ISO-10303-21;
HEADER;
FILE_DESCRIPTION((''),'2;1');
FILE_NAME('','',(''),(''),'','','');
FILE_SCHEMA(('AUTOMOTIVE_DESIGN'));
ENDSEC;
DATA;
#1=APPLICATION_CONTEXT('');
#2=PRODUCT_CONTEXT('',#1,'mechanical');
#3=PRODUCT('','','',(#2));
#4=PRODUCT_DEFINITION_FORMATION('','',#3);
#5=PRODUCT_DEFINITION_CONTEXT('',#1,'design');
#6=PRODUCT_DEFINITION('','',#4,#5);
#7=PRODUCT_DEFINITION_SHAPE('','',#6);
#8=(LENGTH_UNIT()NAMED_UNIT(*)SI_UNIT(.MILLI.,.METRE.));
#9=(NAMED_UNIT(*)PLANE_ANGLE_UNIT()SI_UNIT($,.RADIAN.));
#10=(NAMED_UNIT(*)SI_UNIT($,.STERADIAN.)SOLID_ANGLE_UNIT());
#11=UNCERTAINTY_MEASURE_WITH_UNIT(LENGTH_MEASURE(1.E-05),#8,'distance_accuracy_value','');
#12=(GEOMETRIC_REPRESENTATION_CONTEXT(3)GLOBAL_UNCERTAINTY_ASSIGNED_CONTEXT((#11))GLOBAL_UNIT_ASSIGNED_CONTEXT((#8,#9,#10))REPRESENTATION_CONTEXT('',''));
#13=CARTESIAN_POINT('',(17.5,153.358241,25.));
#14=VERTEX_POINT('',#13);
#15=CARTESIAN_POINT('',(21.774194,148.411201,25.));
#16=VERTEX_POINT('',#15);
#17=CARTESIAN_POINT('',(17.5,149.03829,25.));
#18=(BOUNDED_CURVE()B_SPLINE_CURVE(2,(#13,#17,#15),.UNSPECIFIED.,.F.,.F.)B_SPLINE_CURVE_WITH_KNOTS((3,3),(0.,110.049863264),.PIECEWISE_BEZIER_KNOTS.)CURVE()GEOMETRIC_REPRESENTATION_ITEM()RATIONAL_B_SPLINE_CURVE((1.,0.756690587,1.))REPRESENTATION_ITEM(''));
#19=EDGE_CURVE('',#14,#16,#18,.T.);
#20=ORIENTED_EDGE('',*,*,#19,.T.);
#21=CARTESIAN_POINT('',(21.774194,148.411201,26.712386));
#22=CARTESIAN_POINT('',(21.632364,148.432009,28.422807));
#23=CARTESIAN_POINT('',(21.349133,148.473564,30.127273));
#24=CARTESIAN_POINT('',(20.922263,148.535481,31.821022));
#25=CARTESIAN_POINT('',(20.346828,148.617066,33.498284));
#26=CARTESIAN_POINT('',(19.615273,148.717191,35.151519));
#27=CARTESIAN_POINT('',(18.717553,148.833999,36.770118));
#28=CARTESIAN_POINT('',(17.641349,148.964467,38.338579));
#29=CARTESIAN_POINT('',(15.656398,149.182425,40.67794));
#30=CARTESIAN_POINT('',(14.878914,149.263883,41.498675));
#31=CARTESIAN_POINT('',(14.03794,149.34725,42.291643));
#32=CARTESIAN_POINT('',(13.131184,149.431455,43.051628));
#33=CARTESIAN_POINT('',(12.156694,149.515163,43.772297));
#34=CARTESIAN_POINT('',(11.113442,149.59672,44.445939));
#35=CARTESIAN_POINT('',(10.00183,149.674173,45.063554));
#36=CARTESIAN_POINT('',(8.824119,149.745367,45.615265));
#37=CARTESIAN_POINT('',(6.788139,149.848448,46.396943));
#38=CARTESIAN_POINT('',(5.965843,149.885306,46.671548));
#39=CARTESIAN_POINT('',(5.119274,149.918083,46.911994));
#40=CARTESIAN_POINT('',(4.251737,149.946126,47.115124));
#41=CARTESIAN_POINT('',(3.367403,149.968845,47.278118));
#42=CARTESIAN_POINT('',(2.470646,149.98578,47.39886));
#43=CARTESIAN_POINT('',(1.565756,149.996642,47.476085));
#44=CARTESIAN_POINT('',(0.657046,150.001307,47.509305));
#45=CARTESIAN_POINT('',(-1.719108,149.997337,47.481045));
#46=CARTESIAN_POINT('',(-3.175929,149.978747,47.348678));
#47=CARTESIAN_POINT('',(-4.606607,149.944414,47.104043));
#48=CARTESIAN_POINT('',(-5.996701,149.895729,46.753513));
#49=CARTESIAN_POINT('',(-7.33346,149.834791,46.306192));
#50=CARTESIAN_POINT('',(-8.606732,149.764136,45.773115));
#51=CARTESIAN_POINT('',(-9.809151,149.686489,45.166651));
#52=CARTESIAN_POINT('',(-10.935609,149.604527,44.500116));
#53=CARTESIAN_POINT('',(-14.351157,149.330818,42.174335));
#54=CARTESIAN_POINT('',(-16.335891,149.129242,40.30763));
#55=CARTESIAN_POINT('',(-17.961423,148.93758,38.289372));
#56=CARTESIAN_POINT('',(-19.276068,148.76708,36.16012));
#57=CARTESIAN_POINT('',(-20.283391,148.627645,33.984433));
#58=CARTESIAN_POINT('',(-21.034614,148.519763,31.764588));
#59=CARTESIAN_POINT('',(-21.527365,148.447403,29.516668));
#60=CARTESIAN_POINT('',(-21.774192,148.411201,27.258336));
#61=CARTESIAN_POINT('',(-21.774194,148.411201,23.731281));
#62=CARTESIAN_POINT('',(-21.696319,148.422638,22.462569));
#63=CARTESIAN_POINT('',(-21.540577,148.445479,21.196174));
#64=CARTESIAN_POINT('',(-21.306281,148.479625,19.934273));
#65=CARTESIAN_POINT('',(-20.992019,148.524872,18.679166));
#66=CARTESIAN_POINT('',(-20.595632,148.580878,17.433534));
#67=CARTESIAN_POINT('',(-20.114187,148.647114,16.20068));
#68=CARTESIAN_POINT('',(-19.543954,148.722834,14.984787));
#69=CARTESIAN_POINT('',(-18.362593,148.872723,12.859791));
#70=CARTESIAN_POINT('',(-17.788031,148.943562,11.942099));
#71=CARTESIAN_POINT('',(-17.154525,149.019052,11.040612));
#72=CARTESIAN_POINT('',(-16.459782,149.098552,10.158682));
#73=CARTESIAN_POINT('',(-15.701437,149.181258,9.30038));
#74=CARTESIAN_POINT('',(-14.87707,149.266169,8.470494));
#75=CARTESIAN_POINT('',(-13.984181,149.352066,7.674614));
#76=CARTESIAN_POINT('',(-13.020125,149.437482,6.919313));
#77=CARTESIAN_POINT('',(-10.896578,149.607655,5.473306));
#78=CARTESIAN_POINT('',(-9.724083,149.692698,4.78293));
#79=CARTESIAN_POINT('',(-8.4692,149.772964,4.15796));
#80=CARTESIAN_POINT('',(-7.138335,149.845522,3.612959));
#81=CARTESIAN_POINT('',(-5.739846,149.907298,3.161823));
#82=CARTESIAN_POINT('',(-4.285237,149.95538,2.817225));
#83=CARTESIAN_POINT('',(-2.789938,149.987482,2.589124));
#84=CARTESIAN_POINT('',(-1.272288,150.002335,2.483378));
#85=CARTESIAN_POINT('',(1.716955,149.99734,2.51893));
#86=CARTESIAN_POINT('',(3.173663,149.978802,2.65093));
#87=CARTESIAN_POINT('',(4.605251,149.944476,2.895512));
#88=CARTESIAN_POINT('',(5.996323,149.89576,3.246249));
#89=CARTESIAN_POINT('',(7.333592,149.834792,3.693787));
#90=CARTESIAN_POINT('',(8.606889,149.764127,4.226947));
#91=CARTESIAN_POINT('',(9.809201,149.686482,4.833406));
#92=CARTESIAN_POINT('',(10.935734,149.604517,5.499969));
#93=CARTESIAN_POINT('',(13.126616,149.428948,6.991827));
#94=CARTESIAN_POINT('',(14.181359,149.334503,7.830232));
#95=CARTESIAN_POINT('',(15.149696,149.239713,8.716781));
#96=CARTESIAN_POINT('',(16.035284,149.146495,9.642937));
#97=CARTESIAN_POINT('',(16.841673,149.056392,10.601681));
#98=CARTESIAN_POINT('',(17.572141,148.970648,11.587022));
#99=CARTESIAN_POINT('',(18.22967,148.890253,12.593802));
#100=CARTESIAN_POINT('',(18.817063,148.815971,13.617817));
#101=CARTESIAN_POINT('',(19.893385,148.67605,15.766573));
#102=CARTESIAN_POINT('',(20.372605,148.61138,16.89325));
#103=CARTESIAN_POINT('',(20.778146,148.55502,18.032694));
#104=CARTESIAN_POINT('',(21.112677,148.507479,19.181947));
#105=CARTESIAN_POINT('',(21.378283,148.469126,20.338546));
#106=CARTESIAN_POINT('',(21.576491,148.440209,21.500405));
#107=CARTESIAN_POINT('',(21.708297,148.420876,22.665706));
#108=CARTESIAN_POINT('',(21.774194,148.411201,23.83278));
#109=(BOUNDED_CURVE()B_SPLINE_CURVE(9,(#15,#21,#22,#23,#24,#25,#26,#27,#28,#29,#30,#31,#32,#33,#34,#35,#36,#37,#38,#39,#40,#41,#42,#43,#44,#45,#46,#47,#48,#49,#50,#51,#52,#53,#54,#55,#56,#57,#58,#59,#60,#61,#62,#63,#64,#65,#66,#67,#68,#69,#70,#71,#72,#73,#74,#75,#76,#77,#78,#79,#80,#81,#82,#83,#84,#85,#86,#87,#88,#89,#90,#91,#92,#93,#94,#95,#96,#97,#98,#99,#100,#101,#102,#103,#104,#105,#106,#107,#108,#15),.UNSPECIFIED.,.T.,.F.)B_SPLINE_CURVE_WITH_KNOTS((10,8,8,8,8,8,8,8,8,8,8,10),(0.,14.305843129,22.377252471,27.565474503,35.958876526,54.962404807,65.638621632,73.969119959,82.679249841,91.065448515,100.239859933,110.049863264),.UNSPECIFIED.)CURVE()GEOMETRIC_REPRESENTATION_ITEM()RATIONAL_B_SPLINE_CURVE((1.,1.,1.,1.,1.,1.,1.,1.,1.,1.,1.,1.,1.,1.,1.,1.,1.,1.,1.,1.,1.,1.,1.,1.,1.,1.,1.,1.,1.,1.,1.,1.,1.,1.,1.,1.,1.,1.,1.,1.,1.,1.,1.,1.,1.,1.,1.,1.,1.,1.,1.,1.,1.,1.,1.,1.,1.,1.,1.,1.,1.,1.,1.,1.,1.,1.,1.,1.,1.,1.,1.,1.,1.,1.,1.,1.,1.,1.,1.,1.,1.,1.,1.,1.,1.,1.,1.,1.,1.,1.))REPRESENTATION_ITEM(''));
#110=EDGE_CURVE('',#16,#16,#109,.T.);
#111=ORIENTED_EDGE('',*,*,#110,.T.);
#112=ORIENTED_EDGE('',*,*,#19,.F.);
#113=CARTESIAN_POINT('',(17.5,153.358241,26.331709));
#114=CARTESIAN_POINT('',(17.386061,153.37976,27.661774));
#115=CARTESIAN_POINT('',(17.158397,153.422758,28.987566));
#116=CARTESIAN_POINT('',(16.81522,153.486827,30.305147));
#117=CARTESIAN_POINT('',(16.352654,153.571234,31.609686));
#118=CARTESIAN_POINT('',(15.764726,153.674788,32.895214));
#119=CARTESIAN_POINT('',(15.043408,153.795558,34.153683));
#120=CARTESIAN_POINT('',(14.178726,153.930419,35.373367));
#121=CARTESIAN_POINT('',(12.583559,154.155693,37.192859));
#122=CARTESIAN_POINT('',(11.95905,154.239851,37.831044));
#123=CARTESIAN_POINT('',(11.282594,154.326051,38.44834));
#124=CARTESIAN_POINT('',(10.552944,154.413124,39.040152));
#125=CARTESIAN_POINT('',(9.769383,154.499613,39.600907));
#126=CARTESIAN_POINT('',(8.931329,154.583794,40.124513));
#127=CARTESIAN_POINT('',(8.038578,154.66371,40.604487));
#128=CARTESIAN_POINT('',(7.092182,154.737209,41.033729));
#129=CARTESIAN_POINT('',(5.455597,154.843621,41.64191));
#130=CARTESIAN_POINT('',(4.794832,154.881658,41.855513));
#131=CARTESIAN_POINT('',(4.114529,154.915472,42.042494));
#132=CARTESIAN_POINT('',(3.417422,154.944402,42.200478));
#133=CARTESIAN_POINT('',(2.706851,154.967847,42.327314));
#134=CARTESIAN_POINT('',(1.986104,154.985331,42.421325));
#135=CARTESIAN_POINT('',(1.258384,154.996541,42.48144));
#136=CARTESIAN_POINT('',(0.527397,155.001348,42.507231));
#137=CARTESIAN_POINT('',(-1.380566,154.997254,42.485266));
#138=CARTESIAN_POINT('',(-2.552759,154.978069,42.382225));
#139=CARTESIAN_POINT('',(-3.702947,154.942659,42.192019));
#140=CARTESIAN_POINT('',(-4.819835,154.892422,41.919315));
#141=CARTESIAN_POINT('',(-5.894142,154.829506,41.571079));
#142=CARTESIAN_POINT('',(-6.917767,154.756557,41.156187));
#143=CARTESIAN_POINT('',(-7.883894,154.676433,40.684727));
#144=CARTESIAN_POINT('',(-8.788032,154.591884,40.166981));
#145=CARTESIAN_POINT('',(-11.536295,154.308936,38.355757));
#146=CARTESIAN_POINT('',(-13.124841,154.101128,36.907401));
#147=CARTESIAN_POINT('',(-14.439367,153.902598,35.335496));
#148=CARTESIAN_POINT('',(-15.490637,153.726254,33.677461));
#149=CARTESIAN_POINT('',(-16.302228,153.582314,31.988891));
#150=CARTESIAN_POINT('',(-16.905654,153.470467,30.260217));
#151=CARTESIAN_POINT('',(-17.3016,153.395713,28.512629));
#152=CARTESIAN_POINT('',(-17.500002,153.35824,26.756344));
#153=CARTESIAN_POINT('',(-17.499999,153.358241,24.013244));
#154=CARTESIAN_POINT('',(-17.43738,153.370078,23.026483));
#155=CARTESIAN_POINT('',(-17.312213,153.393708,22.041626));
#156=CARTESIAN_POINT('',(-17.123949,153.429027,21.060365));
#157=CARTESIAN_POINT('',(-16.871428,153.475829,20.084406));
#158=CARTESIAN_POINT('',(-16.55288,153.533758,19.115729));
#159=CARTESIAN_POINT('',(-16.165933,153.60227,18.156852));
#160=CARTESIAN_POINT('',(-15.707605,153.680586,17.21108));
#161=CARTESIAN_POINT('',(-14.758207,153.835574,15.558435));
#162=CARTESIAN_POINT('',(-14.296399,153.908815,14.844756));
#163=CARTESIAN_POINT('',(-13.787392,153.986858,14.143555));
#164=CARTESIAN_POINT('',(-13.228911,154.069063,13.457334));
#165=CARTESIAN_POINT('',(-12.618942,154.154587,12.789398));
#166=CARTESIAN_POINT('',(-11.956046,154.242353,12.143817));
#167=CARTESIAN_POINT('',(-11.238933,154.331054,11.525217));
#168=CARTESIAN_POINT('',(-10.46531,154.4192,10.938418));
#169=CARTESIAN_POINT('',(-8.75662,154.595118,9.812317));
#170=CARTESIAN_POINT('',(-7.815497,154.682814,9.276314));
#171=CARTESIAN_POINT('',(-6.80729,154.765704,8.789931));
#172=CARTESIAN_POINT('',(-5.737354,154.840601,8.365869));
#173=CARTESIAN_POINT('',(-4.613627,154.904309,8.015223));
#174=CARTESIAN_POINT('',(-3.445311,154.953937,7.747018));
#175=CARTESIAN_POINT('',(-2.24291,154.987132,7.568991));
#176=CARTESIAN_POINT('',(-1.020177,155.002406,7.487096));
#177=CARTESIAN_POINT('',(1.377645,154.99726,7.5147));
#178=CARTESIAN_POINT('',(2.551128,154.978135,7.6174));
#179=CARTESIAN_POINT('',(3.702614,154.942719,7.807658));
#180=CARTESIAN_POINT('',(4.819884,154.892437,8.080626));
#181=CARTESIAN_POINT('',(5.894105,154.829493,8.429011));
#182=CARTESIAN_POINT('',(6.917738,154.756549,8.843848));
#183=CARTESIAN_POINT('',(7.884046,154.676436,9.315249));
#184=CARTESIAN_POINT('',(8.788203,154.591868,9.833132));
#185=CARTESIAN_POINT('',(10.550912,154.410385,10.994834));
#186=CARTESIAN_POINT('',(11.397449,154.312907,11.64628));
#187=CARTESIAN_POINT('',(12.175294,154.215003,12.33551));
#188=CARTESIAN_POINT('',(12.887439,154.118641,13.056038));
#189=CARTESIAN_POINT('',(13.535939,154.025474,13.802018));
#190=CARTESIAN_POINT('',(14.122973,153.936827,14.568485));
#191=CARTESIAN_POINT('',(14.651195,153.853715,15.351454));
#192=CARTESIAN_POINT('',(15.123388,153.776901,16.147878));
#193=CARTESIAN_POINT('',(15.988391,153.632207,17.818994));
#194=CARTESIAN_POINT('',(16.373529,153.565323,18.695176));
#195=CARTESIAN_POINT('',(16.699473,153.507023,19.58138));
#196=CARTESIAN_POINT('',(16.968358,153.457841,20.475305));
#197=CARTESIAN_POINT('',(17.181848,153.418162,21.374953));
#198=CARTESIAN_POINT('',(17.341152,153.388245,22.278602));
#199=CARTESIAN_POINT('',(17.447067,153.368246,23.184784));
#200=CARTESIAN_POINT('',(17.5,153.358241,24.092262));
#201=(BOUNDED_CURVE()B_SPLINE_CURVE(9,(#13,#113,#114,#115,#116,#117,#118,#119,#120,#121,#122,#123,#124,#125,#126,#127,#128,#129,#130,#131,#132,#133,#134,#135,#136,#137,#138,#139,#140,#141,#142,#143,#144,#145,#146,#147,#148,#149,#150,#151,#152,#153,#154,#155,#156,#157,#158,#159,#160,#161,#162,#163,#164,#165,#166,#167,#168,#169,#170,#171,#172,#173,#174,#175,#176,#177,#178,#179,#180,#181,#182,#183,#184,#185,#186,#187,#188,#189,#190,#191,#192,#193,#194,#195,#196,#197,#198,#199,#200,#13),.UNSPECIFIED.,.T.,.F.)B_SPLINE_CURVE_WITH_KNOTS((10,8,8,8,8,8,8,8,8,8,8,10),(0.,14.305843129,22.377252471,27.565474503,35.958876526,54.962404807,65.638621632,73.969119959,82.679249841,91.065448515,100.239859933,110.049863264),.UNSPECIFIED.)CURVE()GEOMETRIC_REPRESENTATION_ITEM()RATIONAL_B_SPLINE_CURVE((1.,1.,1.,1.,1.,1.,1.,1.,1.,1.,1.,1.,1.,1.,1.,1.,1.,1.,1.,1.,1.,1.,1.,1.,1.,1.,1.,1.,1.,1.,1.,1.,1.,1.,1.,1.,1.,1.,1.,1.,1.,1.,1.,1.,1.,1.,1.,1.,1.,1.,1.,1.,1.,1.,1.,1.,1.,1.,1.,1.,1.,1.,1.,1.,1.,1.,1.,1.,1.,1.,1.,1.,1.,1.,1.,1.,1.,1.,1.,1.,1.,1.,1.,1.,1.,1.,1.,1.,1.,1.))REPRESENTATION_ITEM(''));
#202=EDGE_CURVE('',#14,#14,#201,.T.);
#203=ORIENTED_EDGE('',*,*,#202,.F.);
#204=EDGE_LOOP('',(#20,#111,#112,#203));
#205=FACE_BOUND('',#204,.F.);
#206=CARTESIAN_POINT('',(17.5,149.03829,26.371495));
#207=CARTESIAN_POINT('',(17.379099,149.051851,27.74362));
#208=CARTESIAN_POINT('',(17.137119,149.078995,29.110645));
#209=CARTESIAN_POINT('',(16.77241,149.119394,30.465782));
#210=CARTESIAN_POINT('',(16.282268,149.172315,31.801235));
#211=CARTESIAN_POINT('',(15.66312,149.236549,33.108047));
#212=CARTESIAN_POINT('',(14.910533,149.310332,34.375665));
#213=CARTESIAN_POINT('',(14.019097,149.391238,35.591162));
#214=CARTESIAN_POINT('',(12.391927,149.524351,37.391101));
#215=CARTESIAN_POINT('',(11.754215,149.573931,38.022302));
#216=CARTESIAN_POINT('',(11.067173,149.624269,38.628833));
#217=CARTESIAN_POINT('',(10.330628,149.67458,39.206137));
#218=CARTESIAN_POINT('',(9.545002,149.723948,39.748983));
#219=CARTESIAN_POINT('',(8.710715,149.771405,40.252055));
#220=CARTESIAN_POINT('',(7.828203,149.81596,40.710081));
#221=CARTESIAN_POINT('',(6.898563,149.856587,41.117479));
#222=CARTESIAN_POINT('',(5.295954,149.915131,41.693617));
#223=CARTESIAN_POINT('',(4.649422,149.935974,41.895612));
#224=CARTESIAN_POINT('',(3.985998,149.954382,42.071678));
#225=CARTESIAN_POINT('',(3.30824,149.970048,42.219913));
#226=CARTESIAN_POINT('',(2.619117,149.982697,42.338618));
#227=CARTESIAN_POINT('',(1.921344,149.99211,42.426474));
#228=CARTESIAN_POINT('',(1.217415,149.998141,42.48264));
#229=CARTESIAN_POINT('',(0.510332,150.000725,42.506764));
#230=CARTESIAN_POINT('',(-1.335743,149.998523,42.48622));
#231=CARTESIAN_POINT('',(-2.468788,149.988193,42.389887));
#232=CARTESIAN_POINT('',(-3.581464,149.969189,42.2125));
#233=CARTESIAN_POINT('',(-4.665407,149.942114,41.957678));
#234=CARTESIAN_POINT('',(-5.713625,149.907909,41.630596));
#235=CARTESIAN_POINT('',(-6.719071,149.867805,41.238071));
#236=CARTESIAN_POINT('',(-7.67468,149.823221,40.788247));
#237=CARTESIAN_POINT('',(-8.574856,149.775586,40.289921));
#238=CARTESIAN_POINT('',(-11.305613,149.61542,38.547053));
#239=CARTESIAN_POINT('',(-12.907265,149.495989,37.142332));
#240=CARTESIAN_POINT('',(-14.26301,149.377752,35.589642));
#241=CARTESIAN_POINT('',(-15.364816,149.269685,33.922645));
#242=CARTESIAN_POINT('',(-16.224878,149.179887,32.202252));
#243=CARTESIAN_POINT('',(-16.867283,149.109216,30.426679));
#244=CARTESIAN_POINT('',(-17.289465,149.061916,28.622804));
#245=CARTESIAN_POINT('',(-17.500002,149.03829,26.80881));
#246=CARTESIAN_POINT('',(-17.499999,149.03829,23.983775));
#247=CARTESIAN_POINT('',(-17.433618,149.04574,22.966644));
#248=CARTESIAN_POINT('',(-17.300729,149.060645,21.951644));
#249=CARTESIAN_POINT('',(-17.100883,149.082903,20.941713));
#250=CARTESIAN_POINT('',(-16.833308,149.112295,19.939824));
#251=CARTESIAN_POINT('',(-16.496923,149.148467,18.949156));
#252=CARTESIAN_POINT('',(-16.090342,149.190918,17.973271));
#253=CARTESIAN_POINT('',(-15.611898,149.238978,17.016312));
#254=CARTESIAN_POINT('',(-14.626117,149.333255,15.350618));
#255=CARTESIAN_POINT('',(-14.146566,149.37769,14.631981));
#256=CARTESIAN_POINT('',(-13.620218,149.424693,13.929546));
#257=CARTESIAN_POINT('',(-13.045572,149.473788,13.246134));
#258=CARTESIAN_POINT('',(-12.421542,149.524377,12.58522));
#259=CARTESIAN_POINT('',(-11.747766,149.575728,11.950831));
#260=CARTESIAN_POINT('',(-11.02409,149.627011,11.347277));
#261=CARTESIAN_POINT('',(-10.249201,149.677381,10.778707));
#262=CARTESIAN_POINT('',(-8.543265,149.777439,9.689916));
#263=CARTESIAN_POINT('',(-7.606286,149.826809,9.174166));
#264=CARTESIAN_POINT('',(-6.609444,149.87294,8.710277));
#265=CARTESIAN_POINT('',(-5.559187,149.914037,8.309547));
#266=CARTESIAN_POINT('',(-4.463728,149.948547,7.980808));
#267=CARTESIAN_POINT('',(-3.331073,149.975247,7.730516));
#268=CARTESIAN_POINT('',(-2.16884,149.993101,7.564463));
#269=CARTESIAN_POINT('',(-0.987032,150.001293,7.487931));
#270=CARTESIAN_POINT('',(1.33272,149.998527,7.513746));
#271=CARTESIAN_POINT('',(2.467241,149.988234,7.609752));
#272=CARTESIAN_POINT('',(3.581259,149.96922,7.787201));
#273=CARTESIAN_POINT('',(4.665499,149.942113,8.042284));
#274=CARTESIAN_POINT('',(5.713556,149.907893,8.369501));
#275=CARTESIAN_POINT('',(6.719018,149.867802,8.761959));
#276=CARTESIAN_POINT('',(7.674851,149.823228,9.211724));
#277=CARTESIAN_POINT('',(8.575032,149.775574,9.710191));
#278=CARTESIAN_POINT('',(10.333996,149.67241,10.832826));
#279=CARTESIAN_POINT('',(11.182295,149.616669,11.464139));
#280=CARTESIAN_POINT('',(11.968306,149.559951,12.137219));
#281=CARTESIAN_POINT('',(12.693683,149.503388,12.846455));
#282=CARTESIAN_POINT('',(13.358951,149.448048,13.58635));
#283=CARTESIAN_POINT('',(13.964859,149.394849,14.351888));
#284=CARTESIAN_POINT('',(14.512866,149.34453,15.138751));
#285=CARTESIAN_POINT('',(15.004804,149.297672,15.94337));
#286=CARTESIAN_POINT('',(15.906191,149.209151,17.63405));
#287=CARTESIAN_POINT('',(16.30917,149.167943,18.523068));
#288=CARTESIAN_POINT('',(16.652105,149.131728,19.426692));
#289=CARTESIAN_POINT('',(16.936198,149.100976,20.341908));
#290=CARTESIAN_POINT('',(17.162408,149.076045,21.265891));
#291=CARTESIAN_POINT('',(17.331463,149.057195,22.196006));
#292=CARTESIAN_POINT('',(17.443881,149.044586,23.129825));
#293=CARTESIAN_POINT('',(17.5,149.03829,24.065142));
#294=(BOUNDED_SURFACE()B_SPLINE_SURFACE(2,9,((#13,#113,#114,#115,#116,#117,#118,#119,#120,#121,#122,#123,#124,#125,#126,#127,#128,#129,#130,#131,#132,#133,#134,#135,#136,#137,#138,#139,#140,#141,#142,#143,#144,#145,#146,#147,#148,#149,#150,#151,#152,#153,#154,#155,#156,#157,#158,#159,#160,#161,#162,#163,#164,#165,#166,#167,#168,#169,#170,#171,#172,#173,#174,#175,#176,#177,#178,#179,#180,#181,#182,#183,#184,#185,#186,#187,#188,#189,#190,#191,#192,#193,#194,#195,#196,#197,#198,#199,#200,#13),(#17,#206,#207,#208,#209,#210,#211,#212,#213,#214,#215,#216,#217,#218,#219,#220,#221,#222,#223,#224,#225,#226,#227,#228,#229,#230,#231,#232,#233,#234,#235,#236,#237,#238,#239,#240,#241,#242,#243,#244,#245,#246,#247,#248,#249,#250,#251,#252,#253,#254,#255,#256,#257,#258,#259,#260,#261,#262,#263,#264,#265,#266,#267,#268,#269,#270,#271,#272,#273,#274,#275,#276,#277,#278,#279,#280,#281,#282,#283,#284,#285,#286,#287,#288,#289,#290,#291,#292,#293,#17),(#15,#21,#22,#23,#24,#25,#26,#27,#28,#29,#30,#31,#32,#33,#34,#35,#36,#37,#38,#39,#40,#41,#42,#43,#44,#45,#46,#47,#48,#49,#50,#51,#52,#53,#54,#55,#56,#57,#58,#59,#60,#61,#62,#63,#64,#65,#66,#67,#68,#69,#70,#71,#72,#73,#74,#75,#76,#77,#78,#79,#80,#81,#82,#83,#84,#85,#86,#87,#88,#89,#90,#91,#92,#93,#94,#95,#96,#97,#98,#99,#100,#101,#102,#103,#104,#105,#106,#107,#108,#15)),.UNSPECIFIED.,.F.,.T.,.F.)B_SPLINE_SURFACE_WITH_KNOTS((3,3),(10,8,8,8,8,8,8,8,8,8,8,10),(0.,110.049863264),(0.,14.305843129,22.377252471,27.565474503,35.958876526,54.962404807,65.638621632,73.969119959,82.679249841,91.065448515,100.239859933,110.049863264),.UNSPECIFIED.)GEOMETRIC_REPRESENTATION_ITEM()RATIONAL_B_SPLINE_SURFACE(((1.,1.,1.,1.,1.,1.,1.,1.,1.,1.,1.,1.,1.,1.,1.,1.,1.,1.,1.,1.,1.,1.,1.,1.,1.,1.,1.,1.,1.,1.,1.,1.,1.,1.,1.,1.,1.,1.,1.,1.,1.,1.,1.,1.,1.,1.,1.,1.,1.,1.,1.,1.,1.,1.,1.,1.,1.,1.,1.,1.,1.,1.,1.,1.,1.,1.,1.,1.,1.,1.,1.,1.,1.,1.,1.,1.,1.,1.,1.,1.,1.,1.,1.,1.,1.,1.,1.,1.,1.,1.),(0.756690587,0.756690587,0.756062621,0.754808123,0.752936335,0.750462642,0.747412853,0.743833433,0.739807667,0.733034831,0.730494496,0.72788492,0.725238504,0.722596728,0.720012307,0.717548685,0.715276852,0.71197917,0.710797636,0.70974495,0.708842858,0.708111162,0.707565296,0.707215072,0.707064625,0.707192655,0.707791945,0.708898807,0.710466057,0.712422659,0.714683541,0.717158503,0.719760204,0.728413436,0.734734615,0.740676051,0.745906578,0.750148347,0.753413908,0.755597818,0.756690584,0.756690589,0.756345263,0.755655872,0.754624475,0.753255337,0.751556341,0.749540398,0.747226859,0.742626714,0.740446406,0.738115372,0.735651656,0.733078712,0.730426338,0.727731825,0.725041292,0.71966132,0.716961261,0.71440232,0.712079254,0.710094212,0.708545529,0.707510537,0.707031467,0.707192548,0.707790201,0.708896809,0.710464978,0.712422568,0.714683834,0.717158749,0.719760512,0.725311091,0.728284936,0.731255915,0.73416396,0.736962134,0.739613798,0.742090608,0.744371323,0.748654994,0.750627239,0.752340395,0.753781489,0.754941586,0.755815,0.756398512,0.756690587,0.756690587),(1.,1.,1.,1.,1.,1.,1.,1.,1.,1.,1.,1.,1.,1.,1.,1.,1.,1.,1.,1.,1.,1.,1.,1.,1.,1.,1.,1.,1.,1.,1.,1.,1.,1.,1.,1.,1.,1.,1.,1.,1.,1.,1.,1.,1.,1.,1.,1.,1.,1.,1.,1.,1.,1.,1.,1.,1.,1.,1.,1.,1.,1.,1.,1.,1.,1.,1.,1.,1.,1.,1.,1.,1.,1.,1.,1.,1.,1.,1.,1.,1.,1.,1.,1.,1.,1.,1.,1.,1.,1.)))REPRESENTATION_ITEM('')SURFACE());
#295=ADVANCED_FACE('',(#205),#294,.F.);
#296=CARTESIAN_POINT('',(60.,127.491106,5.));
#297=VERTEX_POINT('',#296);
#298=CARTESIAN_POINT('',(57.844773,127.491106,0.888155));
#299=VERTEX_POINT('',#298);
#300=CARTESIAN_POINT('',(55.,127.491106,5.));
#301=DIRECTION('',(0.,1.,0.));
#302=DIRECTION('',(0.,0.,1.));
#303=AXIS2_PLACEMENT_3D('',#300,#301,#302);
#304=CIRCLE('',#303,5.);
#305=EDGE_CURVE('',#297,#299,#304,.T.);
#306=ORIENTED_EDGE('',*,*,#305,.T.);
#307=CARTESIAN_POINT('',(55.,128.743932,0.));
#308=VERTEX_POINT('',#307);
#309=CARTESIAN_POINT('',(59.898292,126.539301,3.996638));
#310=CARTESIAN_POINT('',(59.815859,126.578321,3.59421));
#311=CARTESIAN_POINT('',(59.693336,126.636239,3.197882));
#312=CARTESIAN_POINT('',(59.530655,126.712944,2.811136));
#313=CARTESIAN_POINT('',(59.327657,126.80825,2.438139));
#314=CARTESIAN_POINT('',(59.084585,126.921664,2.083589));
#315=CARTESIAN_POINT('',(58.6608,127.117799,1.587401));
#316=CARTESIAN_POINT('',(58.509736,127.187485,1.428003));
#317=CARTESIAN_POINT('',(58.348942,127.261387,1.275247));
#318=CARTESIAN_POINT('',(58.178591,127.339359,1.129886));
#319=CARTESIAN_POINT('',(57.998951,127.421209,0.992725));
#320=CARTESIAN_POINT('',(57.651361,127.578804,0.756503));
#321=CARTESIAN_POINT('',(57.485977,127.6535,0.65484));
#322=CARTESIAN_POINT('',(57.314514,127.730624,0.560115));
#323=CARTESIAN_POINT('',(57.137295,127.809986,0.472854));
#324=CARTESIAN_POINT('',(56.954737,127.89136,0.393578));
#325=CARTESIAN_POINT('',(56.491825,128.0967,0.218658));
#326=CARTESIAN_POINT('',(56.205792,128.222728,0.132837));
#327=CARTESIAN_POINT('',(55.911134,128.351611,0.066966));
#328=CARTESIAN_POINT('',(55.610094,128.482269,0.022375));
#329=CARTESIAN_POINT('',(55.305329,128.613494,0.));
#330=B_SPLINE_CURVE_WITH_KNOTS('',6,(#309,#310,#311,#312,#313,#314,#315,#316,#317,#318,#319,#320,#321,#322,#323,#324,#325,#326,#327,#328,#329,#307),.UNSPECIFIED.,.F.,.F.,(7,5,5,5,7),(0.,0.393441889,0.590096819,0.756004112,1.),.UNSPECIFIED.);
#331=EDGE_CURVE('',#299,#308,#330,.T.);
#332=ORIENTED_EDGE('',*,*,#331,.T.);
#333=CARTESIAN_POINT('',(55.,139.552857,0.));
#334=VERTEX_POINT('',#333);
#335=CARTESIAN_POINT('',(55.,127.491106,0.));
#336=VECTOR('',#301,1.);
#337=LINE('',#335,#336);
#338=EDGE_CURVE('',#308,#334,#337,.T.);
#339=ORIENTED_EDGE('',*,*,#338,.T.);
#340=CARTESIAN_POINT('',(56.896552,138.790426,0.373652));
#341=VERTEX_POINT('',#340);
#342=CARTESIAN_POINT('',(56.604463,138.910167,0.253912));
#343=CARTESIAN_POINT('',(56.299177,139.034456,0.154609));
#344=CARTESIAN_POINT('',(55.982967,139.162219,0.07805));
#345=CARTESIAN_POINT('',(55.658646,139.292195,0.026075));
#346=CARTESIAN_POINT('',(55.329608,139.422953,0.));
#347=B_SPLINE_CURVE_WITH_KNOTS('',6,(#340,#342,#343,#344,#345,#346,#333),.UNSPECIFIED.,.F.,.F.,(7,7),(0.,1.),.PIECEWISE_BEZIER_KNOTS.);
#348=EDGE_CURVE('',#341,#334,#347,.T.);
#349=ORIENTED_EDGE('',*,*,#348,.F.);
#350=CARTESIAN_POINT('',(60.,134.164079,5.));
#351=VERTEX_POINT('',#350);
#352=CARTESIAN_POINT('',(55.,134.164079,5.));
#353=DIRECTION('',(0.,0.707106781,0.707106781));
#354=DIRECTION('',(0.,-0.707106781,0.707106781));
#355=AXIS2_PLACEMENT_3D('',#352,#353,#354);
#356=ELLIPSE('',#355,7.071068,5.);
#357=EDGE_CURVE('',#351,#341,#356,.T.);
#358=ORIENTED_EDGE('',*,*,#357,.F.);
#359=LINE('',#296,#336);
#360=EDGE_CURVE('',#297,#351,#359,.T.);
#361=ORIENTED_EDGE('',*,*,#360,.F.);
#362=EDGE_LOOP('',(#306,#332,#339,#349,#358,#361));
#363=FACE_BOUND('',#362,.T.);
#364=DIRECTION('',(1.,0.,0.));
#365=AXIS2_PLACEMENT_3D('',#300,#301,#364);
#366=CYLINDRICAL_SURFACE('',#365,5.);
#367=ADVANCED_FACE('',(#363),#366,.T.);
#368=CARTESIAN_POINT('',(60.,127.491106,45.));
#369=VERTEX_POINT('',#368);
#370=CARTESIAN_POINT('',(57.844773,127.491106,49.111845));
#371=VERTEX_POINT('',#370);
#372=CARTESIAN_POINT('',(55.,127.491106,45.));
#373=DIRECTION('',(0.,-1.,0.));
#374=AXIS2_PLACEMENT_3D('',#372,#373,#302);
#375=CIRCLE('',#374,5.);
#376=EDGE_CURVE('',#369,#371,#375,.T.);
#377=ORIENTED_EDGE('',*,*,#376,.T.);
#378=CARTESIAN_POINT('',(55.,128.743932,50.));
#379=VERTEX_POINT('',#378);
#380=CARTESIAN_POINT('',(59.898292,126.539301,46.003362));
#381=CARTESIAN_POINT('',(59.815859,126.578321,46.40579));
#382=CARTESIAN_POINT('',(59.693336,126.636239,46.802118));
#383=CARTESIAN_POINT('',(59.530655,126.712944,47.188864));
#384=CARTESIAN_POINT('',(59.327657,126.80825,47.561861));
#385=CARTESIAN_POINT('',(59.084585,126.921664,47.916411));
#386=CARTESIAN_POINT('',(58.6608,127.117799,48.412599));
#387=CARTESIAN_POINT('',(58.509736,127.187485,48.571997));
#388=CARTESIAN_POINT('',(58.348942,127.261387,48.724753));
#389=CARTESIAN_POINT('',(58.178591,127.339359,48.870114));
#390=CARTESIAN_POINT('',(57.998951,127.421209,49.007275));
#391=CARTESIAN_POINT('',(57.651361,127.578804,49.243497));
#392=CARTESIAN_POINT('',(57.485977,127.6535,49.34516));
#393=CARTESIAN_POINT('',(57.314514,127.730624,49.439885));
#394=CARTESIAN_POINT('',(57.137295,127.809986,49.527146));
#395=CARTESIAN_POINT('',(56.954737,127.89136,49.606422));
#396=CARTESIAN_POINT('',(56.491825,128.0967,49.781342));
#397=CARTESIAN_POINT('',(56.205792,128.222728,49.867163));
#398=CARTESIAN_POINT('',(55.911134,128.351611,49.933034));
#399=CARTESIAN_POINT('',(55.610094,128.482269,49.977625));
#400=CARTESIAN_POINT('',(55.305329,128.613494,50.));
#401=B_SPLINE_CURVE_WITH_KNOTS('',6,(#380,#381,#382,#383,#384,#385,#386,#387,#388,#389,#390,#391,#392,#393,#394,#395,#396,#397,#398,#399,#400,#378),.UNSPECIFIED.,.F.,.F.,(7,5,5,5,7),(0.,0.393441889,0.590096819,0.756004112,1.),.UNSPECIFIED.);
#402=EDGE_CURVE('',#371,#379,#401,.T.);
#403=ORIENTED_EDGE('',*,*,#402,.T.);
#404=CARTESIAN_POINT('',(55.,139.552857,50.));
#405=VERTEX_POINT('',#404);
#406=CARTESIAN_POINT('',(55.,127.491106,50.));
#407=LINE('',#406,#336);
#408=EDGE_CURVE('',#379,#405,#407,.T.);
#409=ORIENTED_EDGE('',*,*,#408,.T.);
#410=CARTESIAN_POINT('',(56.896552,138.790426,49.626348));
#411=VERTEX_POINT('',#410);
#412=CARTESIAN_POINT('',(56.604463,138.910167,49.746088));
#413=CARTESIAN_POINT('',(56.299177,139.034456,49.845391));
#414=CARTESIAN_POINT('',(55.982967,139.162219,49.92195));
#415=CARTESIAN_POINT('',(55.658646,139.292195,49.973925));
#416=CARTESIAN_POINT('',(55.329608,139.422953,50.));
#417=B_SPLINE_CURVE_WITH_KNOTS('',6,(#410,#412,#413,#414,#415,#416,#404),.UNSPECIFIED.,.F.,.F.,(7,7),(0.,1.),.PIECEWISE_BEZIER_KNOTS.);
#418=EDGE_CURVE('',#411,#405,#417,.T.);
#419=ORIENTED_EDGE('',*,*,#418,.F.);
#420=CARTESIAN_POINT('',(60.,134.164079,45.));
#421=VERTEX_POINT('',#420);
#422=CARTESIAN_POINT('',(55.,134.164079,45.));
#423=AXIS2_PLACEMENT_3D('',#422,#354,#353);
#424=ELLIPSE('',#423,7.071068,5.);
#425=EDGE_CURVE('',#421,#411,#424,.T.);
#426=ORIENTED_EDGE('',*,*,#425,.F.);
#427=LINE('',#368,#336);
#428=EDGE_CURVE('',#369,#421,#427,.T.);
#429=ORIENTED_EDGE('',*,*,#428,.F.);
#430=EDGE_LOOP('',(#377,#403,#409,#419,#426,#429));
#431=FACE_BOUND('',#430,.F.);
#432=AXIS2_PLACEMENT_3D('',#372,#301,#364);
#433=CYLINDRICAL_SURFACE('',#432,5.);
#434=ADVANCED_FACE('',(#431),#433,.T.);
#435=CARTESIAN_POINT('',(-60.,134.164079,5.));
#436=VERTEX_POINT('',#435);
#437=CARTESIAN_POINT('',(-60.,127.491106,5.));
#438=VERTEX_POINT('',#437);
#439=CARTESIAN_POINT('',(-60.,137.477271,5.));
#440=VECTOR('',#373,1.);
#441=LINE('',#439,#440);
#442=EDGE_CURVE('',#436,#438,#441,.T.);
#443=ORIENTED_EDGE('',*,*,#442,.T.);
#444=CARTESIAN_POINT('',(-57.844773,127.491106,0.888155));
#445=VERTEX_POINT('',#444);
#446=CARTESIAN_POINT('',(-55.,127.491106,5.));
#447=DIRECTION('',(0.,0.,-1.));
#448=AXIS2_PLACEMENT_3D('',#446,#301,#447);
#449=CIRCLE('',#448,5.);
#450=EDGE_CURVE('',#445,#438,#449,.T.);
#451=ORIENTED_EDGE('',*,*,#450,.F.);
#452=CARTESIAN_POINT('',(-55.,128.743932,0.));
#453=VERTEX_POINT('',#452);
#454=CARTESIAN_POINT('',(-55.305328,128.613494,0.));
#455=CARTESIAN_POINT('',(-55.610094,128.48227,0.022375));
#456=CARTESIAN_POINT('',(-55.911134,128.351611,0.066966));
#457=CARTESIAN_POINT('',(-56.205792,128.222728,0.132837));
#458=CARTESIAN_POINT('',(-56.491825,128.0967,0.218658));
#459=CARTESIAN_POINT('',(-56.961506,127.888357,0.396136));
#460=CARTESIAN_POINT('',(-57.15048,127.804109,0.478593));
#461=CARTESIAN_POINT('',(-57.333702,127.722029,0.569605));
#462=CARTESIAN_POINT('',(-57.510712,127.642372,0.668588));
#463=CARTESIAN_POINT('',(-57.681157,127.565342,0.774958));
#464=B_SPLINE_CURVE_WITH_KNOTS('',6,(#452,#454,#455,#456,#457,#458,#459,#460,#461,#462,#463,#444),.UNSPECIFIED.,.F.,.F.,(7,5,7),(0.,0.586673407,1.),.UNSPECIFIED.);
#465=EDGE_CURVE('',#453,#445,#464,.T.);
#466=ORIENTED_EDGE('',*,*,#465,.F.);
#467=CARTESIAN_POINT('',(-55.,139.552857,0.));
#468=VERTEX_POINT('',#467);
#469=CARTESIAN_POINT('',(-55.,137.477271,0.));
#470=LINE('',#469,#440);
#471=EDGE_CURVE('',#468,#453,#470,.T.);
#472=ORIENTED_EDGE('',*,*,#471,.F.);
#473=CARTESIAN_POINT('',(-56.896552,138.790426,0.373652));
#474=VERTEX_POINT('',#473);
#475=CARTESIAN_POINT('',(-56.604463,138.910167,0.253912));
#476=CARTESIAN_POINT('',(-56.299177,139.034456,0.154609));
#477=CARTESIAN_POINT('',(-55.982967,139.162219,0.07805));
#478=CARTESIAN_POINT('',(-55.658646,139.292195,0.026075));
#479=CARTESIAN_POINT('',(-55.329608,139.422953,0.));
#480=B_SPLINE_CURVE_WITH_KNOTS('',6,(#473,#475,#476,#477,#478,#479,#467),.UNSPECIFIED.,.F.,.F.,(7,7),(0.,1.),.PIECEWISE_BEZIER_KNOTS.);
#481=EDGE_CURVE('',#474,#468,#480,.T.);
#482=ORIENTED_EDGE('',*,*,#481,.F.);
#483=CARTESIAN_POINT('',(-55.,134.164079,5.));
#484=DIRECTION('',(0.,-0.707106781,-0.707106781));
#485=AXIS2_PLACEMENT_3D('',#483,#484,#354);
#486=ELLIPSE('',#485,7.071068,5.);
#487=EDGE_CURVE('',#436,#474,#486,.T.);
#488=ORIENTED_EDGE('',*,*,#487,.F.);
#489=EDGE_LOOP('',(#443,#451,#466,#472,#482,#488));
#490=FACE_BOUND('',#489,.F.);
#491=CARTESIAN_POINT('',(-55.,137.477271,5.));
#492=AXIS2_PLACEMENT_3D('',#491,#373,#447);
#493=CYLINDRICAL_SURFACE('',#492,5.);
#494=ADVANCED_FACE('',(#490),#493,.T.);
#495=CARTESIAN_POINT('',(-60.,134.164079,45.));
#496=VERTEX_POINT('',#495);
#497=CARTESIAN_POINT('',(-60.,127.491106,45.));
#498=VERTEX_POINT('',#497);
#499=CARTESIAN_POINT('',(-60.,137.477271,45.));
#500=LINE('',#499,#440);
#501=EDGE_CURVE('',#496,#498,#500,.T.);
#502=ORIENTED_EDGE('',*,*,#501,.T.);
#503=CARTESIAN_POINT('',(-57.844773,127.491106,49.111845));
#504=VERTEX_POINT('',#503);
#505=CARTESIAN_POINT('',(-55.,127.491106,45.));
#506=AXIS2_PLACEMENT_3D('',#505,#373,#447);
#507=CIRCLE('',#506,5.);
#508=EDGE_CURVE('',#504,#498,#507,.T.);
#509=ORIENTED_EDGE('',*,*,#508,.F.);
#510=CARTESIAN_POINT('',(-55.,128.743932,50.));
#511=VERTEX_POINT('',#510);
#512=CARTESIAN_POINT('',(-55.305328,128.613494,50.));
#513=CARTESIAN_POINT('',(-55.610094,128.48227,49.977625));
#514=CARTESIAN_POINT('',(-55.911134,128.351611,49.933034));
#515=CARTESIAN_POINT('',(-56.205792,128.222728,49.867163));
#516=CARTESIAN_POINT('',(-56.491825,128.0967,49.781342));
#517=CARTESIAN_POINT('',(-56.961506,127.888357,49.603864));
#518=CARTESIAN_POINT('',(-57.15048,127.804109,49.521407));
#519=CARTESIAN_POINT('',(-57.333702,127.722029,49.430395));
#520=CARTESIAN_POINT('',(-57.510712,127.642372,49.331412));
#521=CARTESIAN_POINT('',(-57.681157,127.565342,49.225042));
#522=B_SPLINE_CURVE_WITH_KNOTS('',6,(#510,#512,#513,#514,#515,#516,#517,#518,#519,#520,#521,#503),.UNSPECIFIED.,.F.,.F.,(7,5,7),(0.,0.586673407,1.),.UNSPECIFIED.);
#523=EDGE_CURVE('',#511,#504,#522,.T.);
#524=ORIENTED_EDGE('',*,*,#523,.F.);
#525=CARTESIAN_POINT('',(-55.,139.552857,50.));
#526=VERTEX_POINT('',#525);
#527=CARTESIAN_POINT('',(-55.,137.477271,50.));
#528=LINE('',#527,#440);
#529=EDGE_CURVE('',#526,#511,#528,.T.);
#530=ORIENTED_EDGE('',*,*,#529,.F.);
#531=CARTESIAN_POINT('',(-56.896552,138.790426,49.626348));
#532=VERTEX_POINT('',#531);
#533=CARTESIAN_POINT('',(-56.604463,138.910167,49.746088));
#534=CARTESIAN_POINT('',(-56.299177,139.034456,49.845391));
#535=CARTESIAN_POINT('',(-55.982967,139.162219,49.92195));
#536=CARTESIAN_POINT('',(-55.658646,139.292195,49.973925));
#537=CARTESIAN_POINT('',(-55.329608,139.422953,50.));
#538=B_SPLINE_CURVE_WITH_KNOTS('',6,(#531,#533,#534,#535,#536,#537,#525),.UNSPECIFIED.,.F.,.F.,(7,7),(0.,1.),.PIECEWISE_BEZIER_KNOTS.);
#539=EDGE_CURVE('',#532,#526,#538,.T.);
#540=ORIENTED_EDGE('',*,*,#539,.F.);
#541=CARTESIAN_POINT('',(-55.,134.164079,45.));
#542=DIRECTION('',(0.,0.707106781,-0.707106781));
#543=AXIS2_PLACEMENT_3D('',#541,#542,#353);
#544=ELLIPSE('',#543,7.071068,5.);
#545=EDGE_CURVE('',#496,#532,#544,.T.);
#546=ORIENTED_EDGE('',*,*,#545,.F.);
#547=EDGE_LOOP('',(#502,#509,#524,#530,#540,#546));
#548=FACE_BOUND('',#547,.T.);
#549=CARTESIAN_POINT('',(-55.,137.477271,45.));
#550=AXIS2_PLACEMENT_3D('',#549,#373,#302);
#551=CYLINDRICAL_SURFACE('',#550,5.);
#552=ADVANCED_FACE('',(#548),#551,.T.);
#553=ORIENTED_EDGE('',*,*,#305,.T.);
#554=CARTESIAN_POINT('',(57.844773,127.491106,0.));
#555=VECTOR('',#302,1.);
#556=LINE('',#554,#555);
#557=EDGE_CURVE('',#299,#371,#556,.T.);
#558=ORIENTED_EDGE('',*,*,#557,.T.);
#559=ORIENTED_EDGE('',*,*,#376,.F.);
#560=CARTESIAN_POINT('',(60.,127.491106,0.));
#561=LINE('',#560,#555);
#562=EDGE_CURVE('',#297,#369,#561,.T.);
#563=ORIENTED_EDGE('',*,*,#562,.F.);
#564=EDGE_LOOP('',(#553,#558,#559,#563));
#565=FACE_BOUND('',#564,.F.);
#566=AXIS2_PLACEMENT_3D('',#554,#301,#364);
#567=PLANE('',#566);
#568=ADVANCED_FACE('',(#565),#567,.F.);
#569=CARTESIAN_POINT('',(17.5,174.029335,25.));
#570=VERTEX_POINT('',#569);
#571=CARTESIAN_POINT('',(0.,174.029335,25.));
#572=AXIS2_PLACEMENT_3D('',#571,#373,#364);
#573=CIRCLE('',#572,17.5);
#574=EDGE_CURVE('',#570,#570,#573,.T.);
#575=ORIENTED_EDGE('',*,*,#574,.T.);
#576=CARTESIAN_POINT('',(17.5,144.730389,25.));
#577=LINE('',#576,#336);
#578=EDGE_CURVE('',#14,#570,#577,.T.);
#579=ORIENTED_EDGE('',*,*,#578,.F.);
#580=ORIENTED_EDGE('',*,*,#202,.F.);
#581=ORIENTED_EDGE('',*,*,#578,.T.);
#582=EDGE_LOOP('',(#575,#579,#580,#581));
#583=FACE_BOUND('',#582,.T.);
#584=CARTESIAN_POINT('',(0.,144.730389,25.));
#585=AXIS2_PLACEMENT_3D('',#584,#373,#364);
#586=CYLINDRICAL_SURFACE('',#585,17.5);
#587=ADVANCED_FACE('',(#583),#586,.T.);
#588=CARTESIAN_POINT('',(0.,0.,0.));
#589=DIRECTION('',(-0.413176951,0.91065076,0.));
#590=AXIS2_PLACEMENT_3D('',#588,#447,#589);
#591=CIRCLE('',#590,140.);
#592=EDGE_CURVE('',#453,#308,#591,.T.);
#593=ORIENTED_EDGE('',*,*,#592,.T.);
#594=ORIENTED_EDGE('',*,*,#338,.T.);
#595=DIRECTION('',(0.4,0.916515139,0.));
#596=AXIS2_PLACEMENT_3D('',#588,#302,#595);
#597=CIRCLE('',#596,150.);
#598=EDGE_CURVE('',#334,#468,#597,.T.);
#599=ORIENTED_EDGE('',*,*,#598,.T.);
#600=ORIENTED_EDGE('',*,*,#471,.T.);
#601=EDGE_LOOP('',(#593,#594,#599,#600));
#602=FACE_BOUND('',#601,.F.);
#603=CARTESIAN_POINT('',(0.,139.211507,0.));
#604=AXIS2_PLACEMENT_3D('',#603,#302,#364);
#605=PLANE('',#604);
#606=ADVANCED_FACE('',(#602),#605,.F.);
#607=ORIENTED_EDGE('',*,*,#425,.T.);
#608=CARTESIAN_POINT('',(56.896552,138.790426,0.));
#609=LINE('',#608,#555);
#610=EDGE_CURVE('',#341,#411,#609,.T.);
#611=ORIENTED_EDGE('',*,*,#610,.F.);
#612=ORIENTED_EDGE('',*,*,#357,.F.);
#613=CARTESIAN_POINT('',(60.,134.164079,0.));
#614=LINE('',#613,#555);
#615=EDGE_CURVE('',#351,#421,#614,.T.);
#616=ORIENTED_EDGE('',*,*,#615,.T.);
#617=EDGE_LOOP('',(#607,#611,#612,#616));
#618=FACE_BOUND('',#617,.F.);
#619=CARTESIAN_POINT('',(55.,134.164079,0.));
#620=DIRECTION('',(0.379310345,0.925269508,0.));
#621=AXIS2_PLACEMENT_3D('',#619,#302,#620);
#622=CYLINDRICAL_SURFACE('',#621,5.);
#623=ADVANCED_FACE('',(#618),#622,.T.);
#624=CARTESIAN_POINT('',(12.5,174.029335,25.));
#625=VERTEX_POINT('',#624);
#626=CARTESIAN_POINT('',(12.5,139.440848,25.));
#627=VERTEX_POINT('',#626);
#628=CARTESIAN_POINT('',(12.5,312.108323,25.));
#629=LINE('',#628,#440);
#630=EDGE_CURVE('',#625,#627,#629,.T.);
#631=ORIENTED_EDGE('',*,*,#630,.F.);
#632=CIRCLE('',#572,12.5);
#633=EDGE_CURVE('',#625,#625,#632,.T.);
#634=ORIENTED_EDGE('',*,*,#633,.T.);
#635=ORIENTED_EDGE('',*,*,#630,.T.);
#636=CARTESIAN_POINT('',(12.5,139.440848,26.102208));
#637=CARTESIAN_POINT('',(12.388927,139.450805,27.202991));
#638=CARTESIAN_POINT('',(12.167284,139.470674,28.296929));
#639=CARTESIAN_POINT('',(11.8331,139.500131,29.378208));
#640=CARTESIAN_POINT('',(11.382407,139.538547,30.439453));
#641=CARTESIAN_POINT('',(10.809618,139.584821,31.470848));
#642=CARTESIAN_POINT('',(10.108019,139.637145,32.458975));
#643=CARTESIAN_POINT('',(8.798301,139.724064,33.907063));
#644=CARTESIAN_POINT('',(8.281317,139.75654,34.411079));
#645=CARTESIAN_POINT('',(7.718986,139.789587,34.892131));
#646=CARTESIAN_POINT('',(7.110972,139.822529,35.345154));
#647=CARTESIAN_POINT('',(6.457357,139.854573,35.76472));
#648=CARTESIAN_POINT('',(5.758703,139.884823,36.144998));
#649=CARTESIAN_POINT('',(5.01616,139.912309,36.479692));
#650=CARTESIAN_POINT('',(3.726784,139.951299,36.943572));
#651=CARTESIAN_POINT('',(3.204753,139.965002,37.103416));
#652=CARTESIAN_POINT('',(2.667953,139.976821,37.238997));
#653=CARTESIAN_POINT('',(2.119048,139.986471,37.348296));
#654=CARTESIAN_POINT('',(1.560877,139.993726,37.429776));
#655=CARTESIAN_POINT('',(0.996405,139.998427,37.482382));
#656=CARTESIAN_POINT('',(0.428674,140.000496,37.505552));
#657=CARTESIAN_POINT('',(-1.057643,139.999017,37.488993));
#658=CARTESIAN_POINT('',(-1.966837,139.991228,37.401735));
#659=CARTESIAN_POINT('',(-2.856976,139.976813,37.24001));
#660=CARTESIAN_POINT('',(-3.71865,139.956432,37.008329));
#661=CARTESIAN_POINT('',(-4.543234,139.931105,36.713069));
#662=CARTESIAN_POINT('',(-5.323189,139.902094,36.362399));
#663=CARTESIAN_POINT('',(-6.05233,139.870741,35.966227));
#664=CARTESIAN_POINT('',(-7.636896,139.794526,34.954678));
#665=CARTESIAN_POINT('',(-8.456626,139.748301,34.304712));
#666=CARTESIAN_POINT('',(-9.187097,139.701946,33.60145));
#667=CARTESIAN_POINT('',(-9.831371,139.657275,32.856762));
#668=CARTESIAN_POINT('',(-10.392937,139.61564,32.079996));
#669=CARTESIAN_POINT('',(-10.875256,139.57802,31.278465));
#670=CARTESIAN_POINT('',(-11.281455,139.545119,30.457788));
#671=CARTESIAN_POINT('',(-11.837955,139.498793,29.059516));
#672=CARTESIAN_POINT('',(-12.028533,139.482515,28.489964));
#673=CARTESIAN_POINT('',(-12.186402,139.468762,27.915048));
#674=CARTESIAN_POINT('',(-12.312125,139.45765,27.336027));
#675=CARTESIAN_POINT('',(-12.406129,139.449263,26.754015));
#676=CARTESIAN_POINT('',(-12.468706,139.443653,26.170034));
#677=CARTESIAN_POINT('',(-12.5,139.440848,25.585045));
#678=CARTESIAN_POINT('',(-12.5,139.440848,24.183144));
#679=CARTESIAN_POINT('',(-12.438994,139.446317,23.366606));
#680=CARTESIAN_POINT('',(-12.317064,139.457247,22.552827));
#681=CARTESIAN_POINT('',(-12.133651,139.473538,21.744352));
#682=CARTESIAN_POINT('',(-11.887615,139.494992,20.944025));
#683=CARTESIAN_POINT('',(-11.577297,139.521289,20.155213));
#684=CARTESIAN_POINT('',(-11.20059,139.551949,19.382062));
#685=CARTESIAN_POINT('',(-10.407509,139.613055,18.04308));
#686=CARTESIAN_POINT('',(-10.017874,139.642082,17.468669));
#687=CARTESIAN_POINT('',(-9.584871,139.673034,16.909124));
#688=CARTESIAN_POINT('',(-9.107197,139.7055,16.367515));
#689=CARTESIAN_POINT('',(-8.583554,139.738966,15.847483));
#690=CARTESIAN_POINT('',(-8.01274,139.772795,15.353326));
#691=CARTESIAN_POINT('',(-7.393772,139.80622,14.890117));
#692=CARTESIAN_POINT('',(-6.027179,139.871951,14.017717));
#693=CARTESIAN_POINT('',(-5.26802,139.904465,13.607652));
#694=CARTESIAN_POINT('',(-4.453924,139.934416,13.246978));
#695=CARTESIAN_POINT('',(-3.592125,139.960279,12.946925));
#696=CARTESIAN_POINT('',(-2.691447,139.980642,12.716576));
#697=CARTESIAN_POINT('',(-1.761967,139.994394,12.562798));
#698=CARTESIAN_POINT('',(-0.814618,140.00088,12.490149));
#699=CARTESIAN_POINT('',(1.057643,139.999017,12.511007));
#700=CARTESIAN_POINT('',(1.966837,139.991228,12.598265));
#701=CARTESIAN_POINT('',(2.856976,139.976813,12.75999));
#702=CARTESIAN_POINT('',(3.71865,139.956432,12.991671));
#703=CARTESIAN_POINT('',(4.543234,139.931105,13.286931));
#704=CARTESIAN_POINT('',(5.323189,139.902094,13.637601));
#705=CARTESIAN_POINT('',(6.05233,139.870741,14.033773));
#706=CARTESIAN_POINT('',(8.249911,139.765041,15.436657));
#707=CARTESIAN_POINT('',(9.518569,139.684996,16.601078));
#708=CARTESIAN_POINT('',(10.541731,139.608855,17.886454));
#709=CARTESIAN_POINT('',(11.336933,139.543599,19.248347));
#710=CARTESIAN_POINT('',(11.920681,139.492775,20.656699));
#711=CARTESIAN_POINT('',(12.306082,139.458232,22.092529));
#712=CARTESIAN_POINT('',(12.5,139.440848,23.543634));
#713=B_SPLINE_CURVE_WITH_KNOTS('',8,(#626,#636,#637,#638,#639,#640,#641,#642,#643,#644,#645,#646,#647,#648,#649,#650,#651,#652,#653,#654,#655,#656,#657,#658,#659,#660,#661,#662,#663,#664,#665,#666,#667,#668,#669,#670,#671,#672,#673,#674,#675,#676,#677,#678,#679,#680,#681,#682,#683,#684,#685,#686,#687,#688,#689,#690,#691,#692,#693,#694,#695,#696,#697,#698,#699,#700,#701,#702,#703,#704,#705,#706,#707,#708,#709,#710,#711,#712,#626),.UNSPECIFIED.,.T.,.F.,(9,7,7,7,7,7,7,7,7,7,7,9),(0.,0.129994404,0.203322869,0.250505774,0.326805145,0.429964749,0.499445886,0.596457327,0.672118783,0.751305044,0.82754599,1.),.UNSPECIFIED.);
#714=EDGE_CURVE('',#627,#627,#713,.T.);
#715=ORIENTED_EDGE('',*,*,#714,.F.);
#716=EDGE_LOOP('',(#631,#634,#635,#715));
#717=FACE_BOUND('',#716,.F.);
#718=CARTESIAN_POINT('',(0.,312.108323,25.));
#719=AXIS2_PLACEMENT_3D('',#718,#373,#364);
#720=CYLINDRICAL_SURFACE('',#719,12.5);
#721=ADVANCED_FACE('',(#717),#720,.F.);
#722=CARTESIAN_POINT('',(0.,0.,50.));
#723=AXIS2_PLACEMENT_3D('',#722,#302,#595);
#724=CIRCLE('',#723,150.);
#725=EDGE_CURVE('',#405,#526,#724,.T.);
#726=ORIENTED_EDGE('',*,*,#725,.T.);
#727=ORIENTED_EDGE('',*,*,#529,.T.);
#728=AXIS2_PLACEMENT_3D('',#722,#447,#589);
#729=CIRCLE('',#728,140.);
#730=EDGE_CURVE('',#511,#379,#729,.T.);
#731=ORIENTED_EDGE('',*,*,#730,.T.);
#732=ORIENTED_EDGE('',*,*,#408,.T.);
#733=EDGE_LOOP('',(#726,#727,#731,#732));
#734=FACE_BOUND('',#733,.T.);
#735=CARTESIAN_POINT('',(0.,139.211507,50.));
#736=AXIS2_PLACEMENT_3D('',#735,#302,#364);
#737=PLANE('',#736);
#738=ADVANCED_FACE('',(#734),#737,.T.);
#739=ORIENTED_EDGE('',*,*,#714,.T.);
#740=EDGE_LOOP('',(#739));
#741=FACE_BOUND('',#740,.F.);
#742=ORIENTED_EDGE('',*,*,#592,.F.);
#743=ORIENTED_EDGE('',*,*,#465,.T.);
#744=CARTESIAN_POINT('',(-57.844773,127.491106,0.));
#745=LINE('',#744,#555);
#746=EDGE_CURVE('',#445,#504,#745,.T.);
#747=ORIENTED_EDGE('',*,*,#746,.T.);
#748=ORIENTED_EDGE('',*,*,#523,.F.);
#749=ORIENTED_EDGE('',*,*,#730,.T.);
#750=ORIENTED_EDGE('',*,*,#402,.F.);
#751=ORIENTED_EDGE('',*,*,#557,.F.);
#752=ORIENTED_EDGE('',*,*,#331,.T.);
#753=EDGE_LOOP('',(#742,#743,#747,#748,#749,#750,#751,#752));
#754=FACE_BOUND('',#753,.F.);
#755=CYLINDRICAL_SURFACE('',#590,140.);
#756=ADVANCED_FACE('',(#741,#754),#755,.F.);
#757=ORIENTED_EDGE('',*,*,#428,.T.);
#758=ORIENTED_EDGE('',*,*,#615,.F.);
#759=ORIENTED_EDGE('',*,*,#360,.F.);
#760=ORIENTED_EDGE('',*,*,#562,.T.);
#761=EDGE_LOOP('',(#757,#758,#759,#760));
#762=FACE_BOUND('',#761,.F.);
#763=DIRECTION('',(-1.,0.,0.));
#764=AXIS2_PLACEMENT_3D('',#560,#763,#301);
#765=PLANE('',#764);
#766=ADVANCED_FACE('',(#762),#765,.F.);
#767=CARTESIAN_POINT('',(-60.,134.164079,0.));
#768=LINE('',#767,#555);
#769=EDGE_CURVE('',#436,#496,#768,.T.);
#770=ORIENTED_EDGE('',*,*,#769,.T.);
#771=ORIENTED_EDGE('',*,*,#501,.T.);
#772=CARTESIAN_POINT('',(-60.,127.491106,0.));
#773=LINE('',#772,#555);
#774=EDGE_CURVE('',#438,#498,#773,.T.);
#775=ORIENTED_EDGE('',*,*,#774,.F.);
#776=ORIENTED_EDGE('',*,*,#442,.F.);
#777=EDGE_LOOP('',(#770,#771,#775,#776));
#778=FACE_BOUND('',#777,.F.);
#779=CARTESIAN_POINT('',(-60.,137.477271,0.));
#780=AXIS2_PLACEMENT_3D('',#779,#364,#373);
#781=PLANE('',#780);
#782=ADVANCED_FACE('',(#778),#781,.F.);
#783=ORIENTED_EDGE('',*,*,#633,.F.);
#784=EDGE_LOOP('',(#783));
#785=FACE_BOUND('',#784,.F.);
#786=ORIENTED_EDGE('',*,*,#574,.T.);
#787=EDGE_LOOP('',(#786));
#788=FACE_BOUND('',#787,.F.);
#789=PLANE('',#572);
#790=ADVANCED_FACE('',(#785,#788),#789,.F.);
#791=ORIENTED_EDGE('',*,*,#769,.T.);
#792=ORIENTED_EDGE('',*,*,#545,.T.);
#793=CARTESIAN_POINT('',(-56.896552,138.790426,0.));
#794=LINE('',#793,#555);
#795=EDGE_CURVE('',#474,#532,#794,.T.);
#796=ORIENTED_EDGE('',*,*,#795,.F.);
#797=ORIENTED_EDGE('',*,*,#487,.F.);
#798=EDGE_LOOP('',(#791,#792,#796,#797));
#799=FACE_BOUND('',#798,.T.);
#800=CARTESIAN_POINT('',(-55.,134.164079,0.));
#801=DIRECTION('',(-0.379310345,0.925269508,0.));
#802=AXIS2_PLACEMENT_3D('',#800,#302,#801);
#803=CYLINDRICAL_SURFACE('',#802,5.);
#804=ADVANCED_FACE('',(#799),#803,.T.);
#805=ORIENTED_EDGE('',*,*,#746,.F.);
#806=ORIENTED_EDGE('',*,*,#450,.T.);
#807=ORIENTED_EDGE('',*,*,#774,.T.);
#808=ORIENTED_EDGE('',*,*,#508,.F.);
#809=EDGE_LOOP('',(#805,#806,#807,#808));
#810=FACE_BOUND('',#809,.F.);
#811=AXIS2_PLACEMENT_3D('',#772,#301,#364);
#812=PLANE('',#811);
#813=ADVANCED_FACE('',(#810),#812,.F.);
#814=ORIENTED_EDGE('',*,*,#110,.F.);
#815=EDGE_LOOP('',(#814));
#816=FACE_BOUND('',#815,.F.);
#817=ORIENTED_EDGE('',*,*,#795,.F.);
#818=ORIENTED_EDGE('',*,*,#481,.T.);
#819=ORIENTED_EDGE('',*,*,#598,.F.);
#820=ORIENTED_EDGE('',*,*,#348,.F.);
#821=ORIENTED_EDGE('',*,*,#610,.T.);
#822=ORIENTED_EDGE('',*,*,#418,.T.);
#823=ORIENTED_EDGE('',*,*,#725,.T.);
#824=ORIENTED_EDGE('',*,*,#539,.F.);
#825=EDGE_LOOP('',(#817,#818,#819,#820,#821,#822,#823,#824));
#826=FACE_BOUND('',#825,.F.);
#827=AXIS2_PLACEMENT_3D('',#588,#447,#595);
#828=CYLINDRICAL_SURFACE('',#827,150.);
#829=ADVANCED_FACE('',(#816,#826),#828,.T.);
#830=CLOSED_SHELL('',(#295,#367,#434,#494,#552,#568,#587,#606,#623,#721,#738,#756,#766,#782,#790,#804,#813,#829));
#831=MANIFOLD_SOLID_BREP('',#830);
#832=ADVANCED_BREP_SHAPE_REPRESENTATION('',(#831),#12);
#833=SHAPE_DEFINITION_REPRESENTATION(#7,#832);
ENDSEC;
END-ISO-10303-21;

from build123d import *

# Parameters (mm, degrees)
F1_DEPTH = 50
F3_START = -144.7303891182
F2_R     = 17.5
F3_DEPTH = 29.2989462614
F4_R     = 5
F6_D     = 25
F7_R     = 5


with BuildPart() as f1:
    # F0 (on Top) → F1 (new body)
    with BuildSketch(Plane.XY):
        with BuildLine():
            ThreePointArc((-57.8447732054, 127.4911064067), (0, 140), (57.8447732054, 127.4911064067))
            Line((57.8447732054, 127.4911064067), (60, 127.4911064067))
            Line((60, 127.4911064067), (60, 137.4772708487))
            ThreePointArc((60, 137.4772708487), (0, 150), (-60, 137.4772708487))
            Line((-60, 137.4772708487), (-60, 127.4911064067))
            Line((-60, 127.4911064067), (-57.8447732054, 127.4911064067))
        make_face()
    extrude(amount=F1_DEPTH)

    # F2 (on Front) → F3 (join)
    with BuildSketch(Plane.XZ.offset(F3_START)):
        with Locations((0, 25)):
            Circle(F2_R)
    extrude(amount=-F3_DEPTH)

    # F4
    f4_edges = [f1.edges().sort_by_distance(p)[0] for p in [
        (-17.5, 148.975669, 25),
    ]]
    fillet(f4_edges, radius=F4_R)

    # F6 (through all)
    with Locations(Plane(origin=(0, 174.0293353796, 0), x_dir=(-1, 0, 0), z_dir=(0, 1, 0))):
        with Locations((0, 25)):
            Hole(F6_D / 2)

    # F7
    f7_edges = [f1.edges().sort_by_distance(p)[0] for p in [
        (-60, 132.484189, 50),
        (-60, 137.477271, 25),
        (-60, 132.484189, 0),
        (60, 132.484189, 50),
        (60, 137.477271, 25),
        (60, 132.484189, 0),
    ]]
    fillet(f7_edges, radius=F7_R)


solid = f1.part
